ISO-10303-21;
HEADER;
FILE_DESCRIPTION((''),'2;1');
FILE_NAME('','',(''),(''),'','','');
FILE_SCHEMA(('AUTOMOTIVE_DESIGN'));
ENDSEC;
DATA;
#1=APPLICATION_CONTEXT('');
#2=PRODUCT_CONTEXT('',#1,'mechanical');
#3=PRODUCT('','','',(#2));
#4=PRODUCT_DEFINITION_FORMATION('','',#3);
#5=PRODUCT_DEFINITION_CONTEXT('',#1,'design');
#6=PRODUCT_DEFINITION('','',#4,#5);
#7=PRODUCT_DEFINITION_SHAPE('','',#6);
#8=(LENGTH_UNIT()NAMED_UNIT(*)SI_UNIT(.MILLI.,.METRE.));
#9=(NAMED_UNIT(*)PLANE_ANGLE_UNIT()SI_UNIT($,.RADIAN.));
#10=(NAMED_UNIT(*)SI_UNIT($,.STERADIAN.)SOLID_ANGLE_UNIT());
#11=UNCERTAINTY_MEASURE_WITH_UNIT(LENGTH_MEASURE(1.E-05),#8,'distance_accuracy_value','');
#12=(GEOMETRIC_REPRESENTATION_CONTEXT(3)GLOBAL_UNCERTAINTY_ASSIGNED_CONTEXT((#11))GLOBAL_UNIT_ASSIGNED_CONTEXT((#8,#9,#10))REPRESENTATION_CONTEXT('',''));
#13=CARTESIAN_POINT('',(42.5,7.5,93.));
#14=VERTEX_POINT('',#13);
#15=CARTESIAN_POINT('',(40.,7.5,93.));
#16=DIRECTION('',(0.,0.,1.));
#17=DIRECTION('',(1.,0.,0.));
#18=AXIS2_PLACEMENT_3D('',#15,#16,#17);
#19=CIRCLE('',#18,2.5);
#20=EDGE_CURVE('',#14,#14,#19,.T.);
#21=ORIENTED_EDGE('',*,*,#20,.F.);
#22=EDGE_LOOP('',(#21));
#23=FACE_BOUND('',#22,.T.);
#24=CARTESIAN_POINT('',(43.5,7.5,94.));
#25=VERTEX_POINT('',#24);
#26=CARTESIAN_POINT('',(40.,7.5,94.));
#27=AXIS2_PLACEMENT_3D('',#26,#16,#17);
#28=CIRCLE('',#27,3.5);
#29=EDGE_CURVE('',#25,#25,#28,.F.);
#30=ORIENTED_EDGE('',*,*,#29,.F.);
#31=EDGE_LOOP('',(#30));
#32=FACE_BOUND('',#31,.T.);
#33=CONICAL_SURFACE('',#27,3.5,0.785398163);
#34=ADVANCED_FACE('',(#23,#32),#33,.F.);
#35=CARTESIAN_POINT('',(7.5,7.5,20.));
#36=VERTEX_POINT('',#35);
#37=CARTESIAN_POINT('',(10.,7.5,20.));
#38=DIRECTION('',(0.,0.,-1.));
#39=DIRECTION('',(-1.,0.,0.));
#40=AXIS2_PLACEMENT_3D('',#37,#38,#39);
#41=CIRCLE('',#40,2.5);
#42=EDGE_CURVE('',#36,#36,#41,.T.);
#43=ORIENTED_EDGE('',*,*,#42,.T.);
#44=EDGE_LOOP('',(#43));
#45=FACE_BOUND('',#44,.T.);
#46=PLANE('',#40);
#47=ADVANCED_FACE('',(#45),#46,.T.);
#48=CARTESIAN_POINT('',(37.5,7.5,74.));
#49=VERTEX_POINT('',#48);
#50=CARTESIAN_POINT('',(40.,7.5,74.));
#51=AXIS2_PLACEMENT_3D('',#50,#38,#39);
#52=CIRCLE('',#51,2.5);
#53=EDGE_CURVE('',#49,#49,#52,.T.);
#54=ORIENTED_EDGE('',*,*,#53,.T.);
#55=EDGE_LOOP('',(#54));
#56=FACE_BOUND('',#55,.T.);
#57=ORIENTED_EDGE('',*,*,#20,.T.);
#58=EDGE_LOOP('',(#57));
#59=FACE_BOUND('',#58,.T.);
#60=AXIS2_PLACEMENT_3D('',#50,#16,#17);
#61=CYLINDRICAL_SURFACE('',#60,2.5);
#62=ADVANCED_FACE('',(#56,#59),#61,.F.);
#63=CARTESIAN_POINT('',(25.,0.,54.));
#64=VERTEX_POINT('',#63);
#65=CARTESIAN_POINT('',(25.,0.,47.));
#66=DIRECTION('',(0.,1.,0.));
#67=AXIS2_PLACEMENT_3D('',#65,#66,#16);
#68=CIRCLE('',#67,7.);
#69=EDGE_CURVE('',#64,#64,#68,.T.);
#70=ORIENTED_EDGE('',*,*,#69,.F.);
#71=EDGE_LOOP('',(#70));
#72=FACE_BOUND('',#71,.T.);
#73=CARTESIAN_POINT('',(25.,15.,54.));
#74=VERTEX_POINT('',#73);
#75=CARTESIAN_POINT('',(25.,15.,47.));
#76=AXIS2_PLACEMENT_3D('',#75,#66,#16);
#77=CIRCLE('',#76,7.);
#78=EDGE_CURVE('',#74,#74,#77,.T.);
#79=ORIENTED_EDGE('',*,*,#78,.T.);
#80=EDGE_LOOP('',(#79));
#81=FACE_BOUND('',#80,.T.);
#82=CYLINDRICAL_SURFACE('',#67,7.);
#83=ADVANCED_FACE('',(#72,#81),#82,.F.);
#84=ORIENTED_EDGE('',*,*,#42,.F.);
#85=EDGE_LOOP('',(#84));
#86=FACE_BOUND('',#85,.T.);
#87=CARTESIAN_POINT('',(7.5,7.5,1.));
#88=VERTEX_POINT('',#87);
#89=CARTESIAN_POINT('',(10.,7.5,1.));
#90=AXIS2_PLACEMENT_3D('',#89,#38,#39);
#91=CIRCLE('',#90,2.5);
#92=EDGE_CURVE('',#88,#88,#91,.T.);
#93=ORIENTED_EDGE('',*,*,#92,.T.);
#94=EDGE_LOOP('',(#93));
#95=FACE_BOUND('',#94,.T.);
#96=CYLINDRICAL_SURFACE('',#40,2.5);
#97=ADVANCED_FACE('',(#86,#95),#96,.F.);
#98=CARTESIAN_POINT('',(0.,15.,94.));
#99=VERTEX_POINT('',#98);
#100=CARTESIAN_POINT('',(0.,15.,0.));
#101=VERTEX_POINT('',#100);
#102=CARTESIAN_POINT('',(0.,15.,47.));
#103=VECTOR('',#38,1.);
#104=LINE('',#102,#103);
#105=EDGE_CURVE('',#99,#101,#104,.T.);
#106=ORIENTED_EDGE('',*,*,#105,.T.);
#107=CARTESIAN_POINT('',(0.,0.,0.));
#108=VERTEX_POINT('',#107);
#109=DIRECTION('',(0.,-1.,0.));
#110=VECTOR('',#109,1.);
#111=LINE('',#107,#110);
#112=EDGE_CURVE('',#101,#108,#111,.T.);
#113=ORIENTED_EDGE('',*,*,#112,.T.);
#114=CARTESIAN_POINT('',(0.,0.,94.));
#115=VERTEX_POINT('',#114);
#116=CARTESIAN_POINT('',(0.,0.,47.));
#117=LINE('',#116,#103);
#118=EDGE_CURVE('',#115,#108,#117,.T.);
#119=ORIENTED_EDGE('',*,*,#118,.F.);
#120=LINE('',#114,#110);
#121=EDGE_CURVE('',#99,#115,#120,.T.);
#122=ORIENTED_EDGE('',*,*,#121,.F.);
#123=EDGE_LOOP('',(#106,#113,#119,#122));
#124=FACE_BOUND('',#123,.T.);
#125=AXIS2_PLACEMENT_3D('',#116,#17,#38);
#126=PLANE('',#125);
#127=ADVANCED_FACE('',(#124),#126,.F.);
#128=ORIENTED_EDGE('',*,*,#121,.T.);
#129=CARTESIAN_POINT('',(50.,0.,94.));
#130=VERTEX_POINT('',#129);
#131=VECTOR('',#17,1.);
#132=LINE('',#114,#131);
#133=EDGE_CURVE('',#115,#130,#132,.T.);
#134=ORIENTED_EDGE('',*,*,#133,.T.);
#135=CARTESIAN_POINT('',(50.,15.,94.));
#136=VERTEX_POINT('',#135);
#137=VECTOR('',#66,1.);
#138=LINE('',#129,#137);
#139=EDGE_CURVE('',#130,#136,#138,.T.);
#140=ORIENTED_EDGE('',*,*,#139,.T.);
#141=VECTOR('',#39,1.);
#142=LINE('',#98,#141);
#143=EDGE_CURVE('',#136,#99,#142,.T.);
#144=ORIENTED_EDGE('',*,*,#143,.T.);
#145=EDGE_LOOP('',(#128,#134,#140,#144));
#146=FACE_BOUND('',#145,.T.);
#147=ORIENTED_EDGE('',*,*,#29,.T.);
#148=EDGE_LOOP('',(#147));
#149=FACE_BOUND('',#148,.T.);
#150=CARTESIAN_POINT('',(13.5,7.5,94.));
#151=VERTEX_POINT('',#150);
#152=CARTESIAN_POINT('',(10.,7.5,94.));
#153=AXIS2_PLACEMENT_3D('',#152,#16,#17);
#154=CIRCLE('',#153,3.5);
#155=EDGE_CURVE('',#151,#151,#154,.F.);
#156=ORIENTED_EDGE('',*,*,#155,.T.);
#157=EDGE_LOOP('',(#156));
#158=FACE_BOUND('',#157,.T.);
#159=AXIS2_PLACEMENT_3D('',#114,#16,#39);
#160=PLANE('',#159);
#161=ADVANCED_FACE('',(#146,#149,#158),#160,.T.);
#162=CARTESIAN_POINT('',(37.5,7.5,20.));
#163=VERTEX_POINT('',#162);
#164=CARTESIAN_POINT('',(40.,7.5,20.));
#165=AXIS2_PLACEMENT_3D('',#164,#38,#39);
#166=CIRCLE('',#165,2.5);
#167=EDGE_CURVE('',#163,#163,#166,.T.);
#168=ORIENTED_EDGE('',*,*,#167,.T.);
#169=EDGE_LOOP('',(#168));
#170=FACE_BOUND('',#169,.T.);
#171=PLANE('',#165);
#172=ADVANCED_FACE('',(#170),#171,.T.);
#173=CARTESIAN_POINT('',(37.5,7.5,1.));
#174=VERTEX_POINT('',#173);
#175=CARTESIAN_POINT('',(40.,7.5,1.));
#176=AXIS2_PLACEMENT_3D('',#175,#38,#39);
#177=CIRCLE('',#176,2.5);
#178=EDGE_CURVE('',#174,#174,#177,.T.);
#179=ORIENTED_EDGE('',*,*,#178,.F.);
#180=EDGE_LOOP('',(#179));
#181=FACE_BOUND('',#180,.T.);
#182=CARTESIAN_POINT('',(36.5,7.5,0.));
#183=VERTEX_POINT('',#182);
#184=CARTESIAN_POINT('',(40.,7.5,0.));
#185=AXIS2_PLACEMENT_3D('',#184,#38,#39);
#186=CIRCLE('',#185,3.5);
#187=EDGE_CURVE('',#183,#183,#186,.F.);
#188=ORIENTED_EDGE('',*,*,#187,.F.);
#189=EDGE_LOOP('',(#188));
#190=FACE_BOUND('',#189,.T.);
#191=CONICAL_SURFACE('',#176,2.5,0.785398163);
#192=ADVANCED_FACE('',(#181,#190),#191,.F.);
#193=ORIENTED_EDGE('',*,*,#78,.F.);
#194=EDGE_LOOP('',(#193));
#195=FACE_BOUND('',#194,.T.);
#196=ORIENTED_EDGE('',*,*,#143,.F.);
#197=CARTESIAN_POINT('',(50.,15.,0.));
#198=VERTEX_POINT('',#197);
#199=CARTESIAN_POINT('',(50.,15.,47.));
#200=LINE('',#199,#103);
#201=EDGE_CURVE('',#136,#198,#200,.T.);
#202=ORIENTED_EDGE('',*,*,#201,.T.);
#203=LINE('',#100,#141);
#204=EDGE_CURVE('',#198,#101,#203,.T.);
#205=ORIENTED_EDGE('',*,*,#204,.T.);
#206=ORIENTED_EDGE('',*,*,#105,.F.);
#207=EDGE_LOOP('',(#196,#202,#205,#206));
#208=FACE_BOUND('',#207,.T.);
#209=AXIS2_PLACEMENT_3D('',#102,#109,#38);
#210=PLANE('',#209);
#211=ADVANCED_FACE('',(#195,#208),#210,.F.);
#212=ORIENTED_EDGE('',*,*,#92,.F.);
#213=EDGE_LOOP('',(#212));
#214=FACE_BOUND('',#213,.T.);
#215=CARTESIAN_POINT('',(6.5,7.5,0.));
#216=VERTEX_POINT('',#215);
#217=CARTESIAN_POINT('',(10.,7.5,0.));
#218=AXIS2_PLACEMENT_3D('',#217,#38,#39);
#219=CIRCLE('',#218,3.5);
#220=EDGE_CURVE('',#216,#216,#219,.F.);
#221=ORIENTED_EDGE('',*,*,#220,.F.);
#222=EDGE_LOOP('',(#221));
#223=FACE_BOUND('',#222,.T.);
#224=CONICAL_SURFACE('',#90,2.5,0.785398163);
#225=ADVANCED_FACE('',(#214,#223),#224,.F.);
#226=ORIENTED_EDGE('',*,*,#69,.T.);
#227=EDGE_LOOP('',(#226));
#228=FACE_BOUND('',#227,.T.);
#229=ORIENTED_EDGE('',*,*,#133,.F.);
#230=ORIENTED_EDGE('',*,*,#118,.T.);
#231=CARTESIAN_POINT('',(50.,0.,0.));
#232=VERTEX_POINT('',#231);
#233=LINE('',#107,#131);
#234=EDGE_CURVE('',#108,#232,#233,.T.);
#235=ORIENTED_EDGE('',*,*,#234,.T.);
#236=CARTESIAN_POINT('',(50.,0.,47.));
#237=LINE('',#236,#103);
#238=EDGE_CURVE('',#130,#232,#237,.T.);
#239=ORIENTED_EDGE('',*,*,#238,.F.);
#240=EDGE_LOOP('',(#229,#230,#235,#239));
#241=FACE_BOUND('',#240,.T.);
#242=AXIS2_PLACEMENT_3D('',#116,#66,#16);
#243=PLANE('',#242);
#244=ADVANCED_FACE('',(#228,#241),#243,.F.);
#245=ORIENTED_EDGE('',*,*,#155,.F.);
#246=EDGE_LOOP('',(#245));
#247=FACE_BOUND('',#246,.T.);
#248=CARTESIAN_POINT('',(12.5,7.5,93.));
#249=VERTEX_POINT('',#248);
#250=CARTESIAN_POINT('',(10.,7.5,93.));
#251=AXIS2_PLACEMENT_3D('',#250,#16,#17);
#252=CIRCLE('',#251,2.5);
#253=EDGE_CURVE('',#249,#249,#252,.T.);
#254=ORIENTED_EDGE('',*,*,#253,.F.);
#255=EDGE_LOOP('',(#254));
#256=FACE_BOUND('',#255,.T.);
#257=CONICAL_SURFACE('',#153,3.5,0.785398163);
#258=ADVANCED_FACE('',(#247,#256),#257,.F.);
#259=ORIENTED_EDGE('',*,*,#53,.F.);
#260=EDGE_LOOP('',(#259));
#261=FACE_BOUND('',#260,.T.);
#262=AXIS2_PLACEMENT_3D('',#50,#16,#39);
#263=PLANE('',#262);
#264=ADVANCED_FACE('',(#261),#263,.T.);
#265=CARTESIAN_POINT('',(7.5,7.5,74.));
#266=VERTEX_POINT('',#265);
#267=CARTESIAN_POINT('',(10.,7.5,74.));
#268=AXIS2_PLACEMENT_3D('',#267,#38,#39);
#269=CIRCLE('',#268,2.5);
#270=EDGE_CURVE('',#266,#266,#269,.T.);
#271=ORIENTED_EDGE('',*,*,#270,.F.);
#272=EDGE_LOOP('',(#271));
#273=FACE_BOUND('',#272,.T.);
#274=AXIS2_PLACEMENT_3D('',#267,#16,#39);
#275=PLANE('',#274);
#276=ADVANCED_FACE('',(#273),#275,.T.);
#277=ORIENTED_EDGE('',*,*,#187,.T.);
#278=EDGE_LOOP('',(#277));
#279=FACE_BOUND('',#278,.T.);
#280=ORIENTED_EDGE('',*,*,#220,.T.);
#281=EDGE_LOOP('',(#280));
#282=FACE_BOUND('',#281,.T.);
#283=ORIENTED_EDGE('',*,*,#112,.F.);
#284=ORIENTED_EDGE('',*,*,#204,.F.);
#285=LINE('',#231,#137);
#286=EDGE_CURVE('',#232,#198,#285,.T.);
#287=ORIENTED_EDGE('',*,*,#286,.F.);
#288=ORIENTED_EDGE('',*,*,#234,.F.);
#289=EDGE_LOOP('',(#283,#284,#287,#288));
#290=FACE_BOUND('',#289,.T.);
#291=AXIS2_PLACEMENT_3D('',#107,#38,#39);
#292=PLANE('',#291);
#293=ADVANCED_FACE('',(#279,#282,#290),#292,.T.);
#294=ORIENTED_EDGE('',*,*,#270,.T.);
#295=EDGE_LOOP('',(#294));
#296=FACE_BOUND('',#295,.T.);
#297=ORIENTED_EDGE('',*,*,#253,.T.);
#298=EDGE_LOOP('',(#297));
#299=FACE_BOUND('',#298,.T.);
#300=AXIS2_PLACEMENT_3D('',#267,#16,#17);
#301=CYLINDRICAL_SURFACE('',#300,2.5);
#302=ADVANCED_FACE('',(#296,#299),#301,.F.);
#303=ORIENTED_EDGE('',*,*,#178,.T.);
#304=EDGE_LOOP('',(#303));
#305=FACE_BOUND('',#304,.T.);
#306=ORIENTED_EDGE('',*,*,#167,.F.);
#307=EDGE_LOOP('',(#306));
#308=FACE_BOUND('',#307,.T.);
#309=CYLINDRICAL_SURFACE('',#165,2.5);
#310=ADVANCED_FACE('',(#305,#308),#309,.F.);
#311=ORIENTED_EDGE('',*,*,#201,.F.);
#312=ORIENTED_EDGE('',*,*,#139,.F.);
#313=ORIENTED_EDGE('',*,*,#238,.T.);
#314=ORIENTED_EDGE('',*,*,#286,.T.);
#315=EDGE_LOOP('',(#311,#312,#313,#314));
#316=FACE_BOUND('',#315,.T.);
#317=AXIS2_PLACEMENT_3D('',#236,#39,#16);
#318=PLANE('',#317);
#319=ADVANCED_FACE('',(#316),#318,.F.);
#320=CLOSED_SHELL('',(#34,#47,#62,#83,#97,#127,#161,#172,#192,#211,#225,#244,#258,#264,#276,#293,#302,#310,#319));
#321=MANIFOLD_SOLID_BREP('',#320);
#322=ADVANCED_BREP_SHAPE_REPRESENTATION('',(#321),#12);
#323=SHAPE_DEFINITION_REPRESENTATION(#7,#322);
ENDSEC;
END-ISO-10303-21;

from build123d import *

# Parameters (mm, degrees)
SZKIC1_W                    = 50
SZKIC1_H                    = 15
DODANIE_WYCI_GNI_CIE1_DEPTH = 47
SZKIC2_R                    = 2.5
WYTNIJ_WYCI_GNI_CIE1_DEPTH  = 20
LUSTRO1_START               = 47
LUSTRO1_OUTLINE_W           = 50
LUSTRO1_OUTLINE_H           = 15
LUSTRO1_OUTLINE_R           = 2.5
LUSTRO1_DEPTH               = 47
LUSTRO1_2_OUTLINE_R         = 2.5
LUSTRO1_2_DEPTH             = 27
SZKIC5_R                    = 7
WYTNIJ_WYCI_GNI_CIE2_DEPTH  = 108.522090753
SFAZOWANIE2_SIZE            = 1


# Read off the part's stored shape, not the designer's step: Lustro1
with BuildPart() as part:
    # Szkic1 → Dodanie-wyciągnięcie1 (new body)
    with BuildSketch(Plane.XY):
        with Locations((25, 7.5)):
            Rectangle(SZKIC1_W, SZKIC1_H)
    extrude(amount=DODANIE_WYCI_GNI_CIE1_DEPTH)

    # Szkic2 → Wytnij-wyciągnięcie1 (cut)
    with BuildSketch(Plane(origin=(0, 0, 0), x_dir=(-1, 0, 0), z_dir=(0, 0, -1))):
        with Locations((-40, 7.5)):
            Circle(SZKIC2_R)
        with Locations((-10, 7.5)):
            Circle(SZKIC2_R)
    extrude(amount=-WYTNIJ_WYCI_GNI_CIE1_DEPTH, mode=Mode.SUBTRACT)

    # Lustro1 outline → Lustro1 (add)
    with BuildSketch(Plane.XY.offset(LUSTRO1_START)):
        with Locations((25, 7.5)):
            Rectangle(LUSTRO1_OUTLINE_W, LUSTRO1_OUTLINE_H)
        with Locations((10, 7.5)):
            Circle(LUSTRO1_OUTLINE_R, mode=Mode.SUBTRACT)
        with Locations((40, 7.5)):
            Circle(LUSTRO1_OUTLINE_R, mode=Mode.SUBTRACT)
    extrude(amount=LUSTRO1_DEPTH)

    # Lustro1 2 outline → Lustro1 2 (add)
    with BuildSketch(Plane.XY.offset(LUSTRO1_START)):
        with Locations((10, 7.5)):
            Circle(LUSTRO1_2_OUTLINE_R)
        with Locations((40, 7.5)):
            Circle(LUSTRO1_2_OUTLINE_R)
    extrude(amount=LUSTRO1_2_DEPTH)

    # Szkic5 → Wytnij-wyciągnięcie2 (cut, through all)
    with BuildSketch(Plane(origin=(0, 15, 0), x_dir=(1, 0, 0), z_dir=(0, 1, 0))):
        with Locations(Location((25, -47, 0), (0, 0, 270))):
            Circle(SZKIC5_R)
    extrude(amount=-WYTNIJ_WYCI_GNI_CIE2_DEPTH, mode=Mode.SUBTRACT)

    # Sfazowanie2
    sfazowanie2_edges = [part.edges().sort_by_distance(p)[0] for p in [
        (42.5, 7.5, 0),
        (12.5, 7.5, 0),
        (37.5, 7.5, 94),
        (7.5, 7.5, 94),
    ]]
    chamfer(sfazowanie2_edges, length=SFAZOWANIE2_SIZE)


solid = part.part
